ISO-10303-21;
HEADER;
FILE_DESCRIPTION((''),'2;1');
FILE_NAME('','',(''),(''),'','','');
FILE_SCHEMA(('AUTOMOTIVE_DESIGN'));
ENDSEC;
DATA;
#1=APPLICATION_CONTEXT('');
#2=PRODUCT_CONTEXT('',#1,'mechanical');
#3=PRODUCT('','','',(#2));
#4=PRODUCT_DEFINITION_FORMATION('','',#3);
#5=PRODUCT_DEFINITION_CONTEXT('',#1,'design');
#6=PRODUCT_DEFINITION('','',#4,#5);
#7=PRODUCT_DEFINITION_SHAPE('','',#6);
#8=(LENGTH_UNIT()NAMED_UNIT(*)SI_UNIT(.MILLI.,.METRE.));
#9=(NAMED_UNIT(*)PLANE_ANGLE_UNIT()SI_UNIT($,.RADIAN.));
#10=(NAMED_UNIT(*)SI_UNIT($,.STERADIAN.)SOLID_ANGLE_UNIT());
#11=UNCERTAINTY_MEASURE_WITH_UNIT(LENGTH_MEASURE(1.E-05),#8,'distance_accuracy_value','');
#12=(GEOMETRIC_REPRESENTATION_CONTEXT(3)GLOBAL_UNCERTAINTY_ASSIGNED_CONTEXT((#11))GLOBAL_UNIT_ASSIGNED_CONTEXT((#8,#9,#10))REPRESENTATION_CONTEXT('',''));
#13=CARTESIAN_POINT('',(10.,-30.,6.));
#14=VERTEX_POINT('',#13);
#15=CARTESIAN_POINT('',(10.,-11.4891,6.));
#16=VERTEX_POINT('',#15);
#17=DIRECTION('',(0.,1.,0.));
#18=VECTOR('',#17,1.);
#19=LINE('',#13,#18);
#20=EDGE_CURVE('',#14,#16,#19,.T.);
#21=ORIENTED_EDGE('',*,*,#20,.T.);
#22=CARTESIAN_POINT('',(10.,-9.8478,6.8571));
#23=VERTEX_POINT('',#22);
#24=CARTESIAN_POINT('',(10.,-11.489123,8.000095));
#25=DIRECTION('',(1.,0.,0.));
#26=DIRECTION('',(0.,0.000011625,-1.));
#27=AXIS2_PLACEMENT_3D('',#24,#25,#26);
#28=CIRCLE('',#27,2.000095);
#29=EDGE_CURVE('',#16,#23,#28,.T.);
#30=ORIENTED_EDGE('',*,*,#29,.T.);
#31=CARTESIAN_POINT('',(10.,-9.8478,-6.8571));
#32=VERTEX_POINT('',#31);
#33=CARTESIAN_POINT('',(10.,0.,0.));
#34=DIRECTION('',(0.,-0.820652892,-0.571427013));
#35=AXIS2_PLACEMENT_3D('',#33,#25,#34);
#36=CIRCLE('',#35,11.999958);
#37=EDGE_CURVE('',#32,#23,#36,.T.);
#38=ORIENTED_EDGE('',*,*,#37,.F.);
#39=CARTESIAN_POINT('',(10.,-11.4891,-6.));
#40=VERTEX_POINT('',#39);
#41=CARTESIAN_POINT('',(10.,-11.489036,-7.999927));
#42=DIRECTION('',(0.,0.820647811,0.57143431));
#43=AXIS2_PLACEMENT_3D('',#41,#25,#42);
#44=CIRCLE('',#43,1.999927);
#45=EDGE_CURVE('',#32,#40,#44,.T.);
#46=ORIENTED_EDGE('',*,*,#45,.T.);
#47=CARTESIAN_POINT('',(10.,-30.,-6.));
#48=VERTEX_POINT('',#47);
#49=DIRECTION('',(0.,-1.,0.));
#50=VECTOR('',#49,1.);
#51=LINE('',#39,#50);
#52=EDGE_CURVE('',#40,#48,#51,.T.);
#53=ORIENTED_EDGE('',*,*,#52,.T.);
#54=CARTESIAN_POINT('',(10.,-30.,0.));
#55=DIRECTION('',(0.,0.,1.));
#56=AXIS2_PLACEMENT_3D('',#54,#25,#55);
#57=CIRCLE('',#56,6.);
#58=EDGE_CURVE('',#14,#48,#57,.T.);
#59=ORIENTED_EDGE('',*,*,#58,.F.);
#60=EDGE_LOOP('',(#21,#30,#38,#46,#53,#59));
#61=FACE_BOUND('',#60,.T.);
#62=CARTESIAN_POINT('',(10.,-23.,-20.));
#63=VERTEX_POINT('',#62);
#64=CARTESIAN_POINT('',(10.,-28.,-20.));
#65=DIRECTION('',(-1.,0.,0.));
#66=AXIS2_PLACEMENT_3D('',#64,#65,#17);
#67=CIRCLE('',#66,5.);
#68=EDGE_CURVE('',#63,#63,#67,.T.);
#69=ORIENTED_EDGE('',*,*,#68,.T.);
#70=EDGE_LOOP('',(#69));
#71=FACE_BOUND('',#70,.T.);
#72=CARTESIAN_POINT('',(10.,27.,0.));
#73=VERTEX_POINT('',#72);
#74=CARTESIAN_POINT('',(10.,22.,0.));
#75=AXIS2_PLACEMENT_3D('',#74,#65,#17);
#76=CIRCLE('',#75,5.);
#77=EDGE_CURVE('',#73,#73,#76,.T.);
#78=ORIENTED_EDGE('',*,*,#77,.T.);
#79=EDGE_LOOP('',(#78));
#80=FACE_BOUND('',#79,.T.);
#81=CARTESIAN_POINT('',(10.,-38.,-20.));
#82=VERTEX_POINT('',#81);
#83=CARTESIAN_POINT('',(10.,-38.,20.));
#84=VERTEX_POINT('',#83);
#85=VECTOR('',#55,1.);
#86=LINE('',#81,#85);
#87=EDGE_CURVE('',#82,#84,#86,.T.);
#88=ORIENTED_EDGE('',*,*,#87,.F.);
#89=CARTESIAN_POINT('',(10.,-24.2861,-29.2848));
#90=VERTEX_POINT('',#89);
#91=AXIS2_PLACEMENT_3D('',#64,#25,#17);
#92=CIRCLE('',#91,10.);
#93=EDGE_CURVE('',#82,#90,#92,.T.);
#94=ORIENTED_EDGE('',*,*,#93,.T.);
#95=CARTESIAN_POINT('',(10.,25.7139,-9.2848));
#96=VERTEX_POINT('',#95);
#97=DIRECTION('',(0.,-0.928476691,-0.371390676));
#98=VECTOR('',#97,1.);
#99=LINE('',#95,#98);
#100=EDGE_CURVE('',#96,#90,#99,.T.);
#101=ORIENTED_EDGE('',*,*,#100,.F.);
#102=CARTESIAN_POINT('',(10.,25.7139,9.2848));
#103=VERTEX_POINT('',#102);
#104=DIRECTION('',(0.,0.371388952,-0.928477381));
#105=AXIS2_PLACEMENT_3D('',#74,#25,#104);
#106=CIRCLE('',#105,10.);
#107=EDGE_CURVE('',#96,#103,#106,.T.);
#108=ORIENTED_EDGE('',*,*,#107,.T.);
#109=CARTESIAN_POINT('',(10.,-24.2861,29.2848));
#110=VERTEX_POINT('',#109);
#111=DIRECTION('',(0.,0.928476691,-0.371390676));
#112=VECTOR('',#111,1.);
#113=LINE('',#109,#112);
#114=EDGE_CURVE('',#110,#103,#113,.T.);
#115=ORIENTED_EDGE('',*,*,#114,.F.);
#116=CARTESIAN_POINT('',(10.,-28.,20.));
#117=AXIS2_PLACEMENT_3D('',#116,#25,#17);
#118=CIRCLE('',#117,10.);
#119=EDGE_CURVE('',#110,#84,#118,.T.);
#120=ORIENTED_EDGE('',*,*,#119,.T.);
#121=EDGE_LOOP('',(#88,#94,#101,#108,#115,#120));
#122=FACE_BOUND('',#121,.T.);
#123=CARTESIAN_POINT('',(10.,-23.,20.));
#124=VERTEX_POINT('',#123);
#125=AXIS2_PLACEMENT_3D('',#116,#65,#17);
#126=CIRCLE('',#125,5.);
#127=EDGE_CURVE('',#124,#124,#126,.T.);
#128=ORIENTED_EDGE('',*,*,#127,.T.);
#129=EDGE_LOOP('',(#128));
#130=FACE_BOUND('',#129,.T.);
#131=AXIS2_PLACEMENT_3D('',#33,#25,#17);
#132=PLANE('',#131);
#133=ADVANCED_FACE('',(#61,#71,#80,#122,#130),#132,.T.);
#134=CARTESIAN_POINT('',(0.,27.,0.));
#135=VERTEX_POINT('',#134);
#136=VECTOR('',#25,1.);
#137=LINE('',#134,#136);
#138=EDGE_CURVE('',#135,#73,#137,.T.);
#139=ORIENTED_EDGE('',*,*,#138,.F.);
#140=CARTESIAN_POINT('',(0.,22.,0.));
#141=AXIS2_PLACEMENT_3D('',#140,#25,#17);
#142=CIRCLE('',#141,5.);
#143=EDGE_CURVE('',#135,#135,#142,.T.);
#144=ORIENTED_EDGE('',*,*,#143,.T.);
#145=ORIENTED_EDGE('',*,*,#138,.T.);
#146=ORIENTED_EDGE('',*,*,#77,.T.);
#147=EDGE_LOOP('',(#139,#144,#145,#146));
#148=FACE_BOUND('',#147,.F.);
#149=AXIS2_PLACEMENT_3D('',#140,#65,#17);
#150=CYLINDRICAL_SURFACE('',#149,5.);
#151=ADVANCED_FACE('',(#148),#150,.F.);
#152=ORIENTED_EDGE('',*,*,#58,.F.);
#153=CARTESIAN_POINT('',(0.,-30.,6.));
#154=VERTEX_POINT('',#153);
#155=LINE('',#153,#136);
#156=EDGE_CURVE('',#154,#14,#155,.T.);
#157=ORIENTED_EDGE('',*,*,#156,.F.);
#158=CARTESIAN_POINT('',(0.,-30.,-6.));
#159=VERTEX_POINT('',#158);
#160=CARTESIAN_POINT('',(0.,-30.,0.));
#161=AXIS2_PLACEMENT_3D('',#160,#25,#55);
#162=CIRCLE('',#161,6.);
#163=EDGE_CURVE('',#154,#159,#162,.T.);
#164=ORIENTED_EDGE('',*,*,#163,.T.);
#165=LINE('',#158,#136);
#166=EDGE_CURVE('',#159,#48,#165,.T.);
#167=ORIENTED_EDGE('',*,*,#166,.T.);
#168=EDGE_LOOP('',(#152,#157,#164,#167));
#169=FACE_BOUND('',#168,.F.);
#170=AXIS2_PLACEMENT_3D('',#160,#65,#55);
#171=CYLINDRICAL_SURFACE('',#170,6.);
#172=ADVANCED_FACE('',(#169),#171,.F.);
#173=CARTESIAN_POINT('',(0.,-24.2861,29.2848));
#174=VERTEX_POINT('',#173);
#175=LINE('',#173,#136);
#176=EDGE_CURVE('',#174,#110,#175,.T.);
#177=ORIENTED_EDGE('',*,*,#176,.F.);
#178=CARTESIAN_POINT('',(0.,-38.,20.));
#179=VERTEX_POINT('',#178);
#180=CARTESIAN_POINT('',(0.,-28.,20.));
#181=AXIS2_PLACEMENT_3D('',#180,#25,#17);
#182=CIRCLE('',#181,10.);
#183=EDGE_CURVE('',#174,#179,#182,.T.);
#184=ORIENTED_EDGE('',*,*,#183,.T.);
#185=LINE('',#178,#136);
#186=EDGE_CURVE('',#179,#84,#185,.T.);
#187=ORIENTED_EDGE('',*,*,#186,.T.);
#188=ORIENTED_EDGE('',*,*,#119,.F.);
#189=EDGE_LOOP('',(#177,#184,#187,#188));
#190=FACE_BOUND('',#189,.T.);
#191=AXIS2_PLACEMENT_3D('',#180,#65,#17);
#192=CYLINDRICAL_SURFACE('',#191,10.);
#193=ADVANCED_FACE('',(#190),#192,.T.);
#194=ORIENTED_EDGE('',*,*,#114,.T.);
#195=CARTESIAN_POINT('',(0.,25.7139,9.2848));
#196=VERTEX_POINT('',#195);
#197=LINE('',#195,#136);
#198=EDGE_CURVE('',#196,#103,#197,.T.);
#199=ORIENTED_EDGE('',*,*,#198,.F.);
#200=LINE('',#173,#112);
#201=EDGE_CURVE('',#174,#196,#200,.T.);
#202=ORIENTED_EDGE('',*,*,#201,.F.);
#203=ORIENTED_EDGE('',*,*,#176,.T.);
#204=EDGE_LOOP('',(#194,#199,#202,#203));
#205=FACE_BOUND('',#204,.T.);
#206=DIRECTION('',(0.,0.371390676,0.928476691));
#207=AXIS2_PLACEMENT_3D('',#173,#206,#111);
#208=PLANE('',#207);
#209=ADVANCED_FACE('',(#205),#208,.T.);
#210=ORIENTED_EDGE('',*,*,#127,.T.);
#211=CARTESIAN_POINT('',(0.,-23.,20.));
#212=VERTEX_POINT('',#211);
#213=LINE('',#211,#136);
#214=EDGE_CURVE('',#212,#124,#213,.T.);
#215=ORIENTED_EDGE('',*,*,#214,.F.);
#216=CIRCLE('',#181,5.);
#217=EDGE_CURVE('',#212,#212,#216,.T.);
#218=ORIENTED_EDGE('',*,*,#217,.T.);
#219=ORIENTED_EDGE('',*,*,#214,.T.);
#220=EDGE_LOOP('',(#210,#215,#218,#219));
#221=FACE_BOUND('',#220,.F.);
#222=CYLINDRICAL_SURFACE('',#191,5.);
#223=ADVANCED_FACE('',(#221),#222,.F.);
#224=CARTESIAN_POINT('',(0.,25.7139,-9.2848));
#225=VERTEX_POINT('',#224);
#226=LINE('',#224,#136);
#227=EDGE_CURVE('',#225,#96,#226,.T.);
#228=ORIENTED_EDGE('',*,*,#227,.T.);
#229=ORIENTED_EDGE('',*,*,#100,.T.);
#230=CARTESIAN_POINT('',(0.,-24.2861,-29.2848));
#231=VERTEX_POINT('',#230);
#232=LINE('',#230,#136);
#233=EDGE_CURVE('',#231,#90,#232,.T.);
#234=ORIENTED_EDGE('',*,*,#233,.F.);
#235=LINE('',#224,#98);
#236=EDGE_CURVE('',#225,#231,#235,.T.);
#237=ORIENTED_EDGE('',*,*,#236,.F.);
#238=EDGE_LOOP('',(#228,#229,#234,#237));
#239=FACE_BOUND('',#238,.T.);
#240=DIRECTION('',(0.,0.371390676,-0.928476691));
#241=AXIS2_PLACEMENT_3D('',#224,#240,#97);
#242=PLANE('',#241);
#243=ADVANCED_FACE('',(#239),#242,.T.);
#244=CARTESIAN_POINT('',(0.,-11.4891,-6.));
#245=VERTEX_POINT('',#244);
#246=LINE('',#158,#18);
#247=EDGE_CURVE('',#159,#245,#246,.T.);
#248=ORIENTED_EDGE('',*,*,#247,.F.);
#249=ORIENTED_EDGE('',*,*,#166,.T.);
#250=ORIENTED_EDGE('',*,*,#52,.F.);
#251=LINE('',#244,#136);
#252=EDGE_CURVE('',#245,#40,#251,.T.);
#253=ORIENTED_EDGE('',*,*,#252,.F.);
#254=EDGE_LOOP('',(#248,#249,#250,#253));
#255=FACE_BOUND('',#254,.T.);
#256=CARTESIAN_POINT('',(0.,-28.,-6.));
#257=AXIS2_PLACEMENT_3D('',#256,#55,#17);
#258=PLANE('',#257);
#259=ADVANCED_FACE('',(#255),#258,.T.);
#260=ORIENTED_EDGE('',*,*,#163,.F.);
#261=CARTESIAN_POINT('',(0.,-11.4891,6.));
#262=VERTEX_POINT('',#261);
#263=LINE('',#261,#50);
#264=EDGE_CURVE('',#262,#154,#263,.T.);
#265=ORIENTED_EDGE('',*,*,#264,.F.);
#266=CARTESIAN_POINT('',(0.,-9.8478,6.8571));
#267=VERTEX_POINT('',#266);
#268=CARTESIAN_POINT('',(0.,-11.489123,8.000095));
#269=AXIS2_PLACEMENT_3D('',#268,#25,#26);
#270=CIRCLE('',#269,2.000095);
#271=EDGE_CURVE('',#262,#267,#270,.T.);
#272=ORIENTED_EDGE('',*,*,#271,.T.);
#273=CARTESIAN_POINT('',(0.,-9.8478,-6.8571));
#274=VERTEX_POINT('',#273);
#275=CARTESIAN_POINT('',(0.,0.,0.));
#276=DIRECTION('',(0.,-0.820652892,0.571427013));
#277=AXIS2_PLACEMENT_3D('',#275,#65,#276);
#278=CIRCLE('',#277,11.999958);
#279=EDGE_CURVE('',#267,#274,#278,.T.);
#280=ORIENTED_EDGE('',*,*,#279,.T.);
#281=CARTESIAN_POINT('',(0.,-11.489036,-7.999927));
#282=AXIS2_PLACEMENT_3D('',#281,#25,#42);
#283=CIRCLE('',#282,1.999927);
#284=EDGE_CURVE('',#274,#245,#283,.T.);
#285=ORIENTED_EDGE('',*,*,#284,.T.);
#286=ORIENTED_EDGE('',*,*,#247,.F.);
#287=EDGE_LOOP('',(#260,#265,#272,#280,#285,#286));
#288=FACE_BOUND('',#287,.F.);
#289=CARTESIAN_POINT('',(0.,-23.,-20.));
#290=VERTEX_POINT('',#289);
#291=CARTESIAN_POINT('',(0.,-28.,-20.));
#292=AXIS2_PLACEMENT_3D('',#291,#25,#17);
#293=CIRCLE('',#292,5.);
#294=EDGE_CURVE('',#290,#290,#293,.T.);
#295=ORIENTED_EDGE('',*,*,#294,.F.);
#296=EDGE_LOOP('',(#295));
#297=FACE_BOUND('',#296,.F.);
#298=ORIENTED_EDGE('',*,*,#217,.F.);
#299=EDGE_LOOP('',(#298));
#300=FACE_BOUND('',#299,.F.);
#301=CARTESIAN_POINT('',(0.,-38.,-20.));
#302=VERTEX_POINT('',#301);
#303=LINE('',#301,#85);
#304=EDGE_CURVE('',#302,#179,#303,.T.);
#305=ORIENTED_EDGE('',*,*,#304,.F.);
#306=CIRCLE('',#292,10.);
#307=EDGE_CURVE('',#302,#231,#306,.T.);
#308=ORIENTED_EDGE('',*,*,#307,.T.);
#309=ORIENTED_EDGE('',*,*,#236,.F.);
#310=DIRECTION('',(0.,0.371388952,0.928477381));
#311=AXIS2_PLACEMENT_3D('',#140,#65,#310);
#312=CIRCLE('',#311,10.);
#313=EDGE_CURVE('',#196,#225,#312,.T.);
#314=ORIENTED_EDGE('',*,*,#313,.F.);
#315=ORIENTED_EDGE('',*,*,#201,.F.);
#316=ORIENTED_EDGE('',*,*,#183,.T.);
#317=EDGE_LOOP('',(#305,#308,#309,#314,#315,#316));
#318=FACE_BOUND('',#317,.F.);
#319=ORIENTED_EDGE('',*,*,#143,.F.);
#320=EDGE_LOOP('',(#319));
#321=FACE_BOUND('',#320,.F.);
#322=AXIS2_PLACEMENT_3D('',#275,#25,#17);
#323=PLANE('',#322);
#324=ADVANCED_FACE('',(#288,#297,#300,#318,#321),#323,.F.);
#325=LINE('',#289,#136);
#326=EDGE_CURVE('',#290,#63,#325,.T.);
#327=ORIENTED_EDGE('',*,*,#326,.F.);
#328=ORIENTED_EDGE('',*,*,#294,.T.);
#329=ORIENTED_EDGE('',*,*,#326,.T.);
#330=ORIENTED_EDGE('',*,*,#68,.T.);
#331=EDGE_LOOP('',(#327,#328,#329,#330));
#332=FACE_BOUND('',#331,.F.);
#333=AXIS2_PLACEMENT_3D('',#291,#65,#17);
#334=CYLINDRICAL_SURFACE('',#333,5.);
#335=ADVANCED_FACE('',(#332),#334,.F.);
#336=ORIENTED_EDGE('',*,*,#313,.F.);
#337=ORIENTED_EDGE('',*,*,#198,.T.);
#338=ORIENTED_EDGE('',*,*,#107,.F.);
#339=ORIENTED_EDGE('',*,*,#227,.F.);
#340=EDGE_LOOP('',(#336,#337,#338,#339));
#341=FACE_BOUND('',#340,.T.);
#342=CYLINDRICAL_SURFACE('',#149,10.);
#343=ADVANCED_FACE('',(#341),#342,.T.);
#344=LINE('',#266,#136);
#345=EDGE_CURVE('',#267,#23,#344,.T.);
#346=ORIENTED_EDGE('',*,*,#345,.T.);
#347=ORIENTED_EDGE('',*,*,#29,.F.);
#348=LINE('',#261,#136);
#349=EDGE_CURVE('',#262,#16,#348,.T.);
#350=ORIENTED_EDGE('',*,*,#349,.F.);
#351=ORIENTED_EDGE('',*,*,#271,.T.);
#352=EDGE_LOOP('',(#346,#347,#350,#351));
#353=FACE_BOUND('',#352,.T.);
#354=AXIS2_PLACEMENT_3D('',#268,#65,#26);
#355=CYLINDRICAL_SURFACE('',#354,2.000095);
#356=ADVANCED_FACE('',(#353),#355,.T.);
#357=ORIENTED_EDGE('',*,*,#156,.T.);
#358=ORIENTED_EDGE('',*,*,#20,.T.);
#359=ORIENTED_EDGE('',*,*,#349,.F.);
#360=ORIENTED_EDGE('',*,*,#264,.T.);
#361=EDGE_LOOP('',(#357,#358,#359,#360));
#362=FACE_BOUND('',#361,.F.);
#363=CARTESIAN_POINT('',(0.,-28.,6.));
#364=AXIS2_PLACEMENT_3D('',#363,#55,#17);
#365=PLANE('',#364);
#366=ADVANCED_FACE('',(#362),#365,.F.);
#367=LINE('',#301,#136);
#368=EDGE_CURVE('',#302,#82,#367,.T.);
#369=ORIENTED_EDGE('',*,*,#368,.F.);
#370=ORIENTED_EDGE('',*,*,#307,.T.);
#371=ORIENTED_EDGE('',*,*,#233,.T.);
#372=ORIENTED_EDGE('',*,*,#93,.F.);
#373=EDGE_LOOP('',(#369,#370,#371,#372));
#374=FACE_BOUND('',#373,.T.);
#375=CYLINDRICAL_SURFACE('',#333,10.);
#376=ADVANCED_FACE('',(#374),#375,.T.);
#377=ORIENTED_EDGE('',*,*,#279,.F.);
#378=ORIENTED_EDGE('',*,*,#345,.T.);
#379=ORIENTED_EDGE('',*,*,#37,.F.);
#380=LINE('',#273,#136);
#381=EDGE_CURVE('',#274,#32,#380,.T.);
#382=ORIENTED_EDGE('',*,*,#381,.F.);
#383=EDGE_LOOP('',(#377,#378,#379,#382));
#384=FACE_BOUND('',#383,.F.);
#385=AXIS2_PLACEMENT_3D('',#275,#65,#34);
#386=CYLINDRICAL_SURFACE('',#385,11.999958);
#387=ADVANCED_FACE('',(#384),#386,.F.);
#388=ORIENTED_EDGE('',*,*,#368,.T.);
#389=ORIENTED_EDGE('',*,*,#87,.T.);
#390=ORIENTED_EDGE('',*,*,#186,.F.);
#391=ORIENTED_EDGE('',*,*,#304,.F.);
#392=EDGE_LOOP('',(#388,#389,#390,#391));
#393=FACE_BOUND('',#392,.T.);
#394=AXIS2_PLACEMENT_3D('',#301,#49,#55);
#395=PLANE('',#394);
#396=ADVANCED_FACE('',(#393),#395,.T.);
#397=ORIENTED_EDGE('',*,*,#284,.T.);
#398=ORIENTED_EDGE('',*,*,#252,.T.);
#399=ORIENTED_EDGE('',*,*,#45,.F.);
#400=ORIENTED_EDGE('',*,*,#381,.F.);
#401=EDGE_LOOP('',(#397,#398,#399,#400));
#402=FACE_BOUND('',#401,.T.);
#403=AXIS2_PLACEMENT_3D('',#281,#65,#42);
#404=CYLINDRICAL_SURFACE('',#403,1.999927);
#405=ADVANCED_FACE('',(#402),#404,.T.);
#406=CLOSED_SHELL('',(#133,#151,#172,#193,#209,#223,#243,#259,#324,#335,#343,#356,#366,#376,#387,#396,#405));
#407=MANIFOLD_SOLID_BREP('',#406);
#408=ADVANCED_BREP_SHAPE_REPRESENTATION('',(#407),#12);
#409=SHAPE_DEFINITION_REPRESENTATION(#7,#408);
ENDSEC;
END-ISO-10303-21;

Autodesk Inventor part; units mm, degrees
ref_plane "YZ Plane" through (0, 0, 0) normal (1, 0, 0) x (0, 1, 0)
ref_plane "XZ Plane" through (0, 0, 0) normal (0, 1, 0) x (-1, 0, 0)
ref_plane "XY Plane" through (0, 0, 0) normal (0, 0, 1) x (1, 0, 0)
sketch "Sketch1" plane through (0, 0, 0) normal (0, 1, 0) x (-1, 0, 0)
  point P0 (0, 0)
extrude "Extrusion1" [suppressed]
sketch "Sketch2" plane through (0, 0, 0) normal (1, 0, 0) x (0, 1, 0)
  arc A0 (-9.8478, -6.8571) -> (-9.8478, 6.8571) centre (0, 0) ccw
  line L0 (0, 0) -> (-30, 0)
  arc A1 (-30, 6) -> (-30, -6) centre (-30, 0) ccw
  line L1 (-30, -6) -> (-11.4891, -6)
  line L2 (-30, 6) -> (-11.4891, 6)
  arc A2 (-9.8478, -6.8571) -> (-11.4891, -6) centre (-11.4891, -8) ccw
  arc A3 (-11.4891, 6) -> (-9.8478, 6.8571) centre (-11.4891, 8) ccw
  line L3 (0, 0) -> (-28, 0)
  line L4 (-28, 0) -> (-28, -20)
  line L5 (-28, -20) -> (-28, 20)
  circle A4 centre (-28, -20) radius 5
  circle A5 centre (-28, 20) radius 5
  line L6 (0, 0) -> (22, 0)
  circle A6 centre (22, 0) radius 5
  circle A7 centre (22, 0) radius 10
  circle A8 centre (-28, -20) radius 10
  circle A9 centre (-28, 20) radius 10
  line L7 (25.7139, -9.2848) -> (-24.2861, -29.2848)
  line L8 (-38, -20) -> (-38, 20)
  line L9 (-24.2861, 29.2848) -> (25.7139, 9.2848)
  point P0 (-10.3923, -6)
  point P1 (-10.3923, 6)
  dimension "d15" = 24
  dimension "d16" = 30
  dimension "d17" = 12
  dimension "d18" = 2
  dimension "d19" = 28
  dimension "d20" = 20
  dimension "d21" = 40
  dimension "d22" = 10
  dimension "d23" = 10
  dimension "d24" = 22
  dimension "d25" = 10
  dimension "d26" = 20
  dimension "d27" = 20
  dimension "d28" = 20
extrude "Extrusion2" add sketch "Sketch2" along normal blind 10 contours A0 A7 L7 A8 L4 L1 A2 | A0 A3 L2 L5 A9 L9 A7 | A7 | L4 A8 L8 A9 L5 L2 A1 L1 | A9 | A8
equation "\"d10\" = 0.5 * d9"
equation "\"d9\" = 6"
